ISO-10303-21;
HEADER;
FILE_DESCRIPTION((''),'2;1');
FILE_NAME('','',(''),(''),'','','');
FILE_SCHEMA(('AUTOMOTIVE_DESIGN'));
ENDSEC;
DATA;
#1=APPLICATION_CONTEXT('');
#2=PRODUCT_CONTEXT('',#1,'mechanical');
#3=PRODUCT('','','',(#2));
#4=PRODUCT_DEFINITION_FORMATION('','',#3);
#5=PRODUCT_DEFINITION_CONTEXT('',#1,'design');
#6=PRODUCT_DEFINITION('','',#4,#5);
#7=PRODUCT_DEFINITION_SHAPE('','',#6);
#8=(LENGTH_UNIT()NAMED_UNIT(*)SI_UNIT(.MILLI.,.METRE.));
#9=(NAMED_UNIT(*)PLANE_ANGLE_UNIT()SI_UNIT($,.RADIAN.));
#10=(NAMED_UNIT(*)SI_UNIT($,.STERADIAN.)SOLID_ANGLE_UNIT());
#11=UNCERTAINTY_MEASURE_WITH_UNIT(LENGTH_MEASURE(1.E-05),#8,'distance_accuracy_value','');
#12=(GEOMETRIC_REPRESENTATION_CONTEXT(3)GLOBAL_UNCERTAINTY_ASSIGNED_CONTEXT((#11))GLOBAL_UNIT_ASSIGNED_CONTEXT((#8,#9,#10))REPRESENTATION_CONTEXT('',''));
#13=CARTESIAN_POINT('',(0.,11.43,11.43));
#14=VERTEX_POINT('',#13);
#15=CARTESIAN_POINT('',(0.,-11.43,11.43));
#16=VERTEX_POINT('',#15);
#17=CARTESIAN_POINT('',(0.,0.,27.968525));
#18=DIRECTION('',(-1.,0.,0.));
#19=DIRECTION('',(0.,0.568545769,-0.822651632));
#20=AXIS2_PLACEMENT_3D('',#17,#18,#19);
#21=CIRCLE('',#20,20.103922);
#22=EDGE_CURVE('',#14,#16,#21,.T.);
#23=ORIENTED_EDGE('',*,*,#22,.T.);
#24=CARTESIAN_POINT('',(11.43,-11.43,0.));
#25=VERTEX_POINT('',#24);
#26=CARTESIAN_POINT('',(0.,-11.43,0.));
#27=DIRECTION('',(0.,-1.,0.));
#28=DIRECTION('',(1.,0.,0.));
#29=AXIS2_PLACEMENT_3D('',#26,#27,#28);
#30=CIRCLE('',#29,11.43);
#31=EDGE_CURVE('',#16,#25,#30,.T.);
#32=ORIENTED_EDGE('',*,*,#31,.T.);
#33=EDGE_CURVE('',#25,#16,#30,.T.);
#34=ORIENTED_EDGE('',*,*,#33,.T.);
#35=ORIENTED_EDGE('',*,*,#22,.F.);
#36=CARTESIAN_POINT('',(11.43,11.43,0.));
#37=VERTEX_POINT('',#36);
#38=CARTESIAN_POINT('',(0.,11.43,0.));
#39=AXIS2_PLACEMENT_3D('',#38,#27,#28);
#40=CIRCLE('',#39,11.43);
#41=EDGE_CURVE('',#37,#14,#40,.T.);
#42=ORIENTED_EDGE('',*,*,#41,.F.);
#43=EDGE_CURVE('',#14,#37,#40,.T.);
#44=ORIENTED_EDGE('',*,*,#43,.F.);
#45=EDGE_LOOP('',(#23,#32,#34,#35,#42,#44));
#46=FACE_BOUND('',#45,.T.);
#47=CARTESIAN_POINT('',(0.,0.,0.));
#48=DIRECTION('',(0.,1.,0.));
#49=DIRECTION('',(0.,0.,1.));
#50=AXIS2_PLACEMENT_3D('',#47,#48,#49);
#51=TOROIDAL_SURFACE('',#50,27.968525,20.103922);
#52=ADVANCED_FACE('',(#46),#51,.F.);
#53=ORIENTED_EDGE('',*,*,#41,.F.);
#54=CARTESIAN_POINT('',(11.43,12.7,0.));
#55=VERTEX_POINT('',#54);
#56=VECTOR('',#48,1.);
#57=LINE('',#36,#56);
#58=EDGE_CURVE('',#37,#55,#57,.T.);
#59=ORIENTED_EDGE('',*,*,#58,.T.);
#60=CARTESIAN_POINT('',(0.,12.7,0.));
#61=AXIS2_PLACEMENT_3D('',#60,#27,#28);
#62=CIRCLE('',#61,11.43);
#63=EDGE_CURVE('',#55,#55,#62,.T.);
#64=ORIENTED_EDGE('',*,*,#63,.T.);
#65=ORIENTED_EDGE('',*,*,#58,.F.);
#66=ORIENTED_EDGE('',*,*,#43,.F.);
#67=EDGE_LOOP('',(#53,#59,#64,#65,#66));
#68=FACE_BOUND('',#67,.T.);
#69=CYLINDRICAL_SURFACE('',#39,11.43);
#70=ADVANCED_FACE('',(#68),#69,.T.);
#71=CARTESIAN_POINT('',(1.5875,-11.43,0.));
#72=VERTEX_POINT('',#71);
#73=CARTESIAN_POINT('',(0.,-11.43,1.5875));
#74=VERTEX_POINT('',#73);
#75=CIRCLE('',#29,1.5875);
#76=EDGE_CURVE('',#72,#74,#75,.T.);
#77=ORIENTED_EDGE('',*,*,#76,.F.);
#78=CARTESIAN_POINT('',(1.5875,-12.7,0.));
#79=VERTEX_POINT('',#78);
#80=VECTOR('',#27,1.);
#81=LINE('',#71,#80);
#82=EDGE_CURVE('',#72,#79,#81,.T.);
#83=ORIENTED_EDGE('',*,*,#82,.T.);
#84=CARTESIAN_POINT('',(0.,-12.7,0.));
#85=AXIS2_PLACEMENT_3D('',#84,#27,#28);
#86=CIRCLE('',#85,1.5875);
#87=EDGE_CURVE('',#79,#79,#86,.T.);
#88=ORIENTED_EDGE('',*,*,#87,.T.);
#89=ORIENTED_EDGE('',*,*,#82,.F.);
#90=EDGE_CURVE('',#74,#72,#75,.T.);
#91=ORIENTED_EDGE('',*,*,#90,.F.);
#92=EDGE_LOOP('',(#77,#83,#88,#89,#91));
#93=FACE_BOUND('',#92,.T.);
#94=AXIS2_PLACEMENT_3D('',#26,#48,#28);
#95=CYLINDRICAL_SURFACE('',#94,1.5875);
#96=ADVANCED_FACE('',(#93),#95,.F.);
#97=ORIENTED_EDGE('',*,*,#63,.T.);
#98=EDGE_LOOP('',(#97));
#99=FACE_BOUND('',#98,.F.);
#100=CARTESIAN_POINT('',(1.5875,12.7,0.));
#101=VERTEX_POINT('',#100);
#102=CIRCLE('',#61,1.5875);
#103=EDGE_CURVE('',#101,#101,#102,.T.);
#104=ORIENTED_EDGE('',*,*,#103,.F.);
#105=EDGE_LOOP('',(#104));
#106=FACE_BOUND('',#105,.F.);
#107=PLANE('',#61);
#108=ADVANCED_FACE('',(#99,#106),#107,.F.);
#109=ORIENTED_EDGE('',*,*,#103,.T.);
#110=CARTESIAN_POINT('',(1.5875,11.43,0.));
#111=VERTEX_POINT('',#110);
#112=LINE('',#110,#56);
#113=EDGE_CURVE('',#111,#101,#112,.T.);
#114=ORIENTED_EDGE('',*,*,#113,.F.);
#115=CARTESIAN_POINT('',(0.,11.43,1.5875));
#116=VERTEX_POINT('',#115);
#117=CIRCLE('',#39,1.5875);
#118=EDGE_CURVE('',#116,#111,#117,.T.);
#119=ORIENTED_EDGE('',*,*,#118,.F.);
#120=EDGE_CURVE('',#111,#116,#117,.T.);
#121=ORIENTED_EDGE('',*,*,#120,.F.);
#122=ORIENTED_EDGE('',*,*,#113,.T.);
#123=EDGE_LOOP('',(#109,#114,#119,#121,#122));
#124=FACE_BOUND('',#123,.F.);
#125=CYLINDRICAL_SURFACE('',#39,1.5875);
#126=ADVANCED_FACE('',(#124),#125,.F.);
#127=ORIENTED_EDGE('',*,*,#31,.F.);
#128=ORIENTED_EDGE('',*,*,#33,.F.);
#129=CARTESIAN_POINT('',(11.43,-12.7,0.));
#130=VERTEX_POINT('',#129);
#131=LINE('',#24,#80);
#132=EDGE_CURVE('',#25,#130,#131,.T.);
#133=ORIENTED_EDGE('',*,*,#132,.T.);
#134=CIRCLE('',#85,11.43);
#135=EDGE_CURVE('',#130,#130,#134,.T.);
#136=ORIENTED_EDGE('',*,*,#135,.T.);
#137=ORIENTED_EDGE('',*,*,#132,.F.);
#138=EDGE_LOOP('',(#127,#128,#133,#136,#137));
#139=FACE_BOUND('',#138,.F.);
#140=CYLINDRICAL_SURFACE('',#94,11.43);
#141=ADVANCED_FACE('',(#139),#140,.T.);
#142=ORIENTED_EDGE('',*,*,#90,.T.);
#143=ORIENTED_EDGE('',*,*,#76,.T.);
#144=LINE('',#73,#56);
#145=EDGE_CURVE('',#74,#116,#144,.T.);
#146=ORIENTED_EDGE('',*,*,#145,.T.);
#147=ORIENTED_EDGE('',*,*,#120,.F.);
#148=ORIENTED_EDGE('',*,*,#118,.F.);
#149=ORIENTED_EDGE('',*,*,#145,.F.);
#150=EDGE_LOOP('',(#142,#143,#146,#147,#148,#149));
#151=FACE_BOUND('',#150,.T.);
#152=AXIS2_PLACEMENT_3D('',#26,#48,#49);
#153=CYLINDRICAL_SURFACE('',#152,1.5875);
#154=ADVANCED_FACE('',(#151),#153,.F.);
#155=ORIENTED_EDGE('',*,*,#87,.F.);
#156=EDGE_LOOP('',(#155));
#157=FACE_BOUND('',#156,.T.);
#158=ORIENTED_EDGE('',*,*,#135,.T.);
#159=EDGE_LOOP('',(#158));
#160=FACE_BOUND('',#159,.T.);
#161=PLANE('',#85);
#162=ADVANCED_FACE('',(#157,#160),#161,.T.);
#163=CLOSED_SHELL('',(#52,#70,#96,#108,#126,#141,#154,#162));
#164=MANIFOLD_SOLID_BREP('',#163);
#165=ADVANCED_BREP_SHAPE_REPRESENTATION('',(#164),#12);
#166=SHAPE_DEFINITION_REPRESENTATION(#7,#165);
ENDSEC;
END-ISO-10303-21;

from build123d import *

# Parameters (mm, degrees)
F2_R     = 11.43
F2_R_2   = 1.5875
F3_DEPTH = 1.27
F5_R     = 11.43
F5_R_2   = 1.5875
F6_DEPTH = 1.27


# Not quite as in the source:
# - a variable given as a bare number and used for a length is read in inches; the dataset says mm whatever the document's units were


with BuildPart() as f3:
    # F2 (on offset) → F3 (new body)
    with BuildSketch(Plane.XZ.offset(11.43)):
        Circle(F2_R)
        Circle(F2_R_2, mode=Mode.SUBTRACT)
    extrude(amount=F3_DEPTH)



with BuildPart() as f6:
    # F5 (on offset) → F6 (new body)
    with BuildSketch(Plane.XZ.offset(-11.43)):
        Circle(F5_R)
        Circle(F5_R_2, mode=Mode.SUBTRACT)
    extrude(amount=-F6_DEPTH)


with BuildPart() as f3_1:
    add(f3.part)

    add(f6.part)  # F8 merges F6
    # F7 (on Right) → F8 (revolve)
    with BuildSketch(Plane.YZ):
        with BuildLine():
            ThreePointArc((11.43, 11.43), (0, 7.8646021863), (-11.43, 11.43))
            Line((-11.43, 11.43), (-11.43, 1.5875))
            Line((-11.43, 1.5875), (11.43, 1.5875))
            Line((11.43, 1.5875), (11.43, 11.43))
        make_face()
    revolve(axis=Axis((0, 0, 0), (0, -1, 0)))


solid = f3_1.part
